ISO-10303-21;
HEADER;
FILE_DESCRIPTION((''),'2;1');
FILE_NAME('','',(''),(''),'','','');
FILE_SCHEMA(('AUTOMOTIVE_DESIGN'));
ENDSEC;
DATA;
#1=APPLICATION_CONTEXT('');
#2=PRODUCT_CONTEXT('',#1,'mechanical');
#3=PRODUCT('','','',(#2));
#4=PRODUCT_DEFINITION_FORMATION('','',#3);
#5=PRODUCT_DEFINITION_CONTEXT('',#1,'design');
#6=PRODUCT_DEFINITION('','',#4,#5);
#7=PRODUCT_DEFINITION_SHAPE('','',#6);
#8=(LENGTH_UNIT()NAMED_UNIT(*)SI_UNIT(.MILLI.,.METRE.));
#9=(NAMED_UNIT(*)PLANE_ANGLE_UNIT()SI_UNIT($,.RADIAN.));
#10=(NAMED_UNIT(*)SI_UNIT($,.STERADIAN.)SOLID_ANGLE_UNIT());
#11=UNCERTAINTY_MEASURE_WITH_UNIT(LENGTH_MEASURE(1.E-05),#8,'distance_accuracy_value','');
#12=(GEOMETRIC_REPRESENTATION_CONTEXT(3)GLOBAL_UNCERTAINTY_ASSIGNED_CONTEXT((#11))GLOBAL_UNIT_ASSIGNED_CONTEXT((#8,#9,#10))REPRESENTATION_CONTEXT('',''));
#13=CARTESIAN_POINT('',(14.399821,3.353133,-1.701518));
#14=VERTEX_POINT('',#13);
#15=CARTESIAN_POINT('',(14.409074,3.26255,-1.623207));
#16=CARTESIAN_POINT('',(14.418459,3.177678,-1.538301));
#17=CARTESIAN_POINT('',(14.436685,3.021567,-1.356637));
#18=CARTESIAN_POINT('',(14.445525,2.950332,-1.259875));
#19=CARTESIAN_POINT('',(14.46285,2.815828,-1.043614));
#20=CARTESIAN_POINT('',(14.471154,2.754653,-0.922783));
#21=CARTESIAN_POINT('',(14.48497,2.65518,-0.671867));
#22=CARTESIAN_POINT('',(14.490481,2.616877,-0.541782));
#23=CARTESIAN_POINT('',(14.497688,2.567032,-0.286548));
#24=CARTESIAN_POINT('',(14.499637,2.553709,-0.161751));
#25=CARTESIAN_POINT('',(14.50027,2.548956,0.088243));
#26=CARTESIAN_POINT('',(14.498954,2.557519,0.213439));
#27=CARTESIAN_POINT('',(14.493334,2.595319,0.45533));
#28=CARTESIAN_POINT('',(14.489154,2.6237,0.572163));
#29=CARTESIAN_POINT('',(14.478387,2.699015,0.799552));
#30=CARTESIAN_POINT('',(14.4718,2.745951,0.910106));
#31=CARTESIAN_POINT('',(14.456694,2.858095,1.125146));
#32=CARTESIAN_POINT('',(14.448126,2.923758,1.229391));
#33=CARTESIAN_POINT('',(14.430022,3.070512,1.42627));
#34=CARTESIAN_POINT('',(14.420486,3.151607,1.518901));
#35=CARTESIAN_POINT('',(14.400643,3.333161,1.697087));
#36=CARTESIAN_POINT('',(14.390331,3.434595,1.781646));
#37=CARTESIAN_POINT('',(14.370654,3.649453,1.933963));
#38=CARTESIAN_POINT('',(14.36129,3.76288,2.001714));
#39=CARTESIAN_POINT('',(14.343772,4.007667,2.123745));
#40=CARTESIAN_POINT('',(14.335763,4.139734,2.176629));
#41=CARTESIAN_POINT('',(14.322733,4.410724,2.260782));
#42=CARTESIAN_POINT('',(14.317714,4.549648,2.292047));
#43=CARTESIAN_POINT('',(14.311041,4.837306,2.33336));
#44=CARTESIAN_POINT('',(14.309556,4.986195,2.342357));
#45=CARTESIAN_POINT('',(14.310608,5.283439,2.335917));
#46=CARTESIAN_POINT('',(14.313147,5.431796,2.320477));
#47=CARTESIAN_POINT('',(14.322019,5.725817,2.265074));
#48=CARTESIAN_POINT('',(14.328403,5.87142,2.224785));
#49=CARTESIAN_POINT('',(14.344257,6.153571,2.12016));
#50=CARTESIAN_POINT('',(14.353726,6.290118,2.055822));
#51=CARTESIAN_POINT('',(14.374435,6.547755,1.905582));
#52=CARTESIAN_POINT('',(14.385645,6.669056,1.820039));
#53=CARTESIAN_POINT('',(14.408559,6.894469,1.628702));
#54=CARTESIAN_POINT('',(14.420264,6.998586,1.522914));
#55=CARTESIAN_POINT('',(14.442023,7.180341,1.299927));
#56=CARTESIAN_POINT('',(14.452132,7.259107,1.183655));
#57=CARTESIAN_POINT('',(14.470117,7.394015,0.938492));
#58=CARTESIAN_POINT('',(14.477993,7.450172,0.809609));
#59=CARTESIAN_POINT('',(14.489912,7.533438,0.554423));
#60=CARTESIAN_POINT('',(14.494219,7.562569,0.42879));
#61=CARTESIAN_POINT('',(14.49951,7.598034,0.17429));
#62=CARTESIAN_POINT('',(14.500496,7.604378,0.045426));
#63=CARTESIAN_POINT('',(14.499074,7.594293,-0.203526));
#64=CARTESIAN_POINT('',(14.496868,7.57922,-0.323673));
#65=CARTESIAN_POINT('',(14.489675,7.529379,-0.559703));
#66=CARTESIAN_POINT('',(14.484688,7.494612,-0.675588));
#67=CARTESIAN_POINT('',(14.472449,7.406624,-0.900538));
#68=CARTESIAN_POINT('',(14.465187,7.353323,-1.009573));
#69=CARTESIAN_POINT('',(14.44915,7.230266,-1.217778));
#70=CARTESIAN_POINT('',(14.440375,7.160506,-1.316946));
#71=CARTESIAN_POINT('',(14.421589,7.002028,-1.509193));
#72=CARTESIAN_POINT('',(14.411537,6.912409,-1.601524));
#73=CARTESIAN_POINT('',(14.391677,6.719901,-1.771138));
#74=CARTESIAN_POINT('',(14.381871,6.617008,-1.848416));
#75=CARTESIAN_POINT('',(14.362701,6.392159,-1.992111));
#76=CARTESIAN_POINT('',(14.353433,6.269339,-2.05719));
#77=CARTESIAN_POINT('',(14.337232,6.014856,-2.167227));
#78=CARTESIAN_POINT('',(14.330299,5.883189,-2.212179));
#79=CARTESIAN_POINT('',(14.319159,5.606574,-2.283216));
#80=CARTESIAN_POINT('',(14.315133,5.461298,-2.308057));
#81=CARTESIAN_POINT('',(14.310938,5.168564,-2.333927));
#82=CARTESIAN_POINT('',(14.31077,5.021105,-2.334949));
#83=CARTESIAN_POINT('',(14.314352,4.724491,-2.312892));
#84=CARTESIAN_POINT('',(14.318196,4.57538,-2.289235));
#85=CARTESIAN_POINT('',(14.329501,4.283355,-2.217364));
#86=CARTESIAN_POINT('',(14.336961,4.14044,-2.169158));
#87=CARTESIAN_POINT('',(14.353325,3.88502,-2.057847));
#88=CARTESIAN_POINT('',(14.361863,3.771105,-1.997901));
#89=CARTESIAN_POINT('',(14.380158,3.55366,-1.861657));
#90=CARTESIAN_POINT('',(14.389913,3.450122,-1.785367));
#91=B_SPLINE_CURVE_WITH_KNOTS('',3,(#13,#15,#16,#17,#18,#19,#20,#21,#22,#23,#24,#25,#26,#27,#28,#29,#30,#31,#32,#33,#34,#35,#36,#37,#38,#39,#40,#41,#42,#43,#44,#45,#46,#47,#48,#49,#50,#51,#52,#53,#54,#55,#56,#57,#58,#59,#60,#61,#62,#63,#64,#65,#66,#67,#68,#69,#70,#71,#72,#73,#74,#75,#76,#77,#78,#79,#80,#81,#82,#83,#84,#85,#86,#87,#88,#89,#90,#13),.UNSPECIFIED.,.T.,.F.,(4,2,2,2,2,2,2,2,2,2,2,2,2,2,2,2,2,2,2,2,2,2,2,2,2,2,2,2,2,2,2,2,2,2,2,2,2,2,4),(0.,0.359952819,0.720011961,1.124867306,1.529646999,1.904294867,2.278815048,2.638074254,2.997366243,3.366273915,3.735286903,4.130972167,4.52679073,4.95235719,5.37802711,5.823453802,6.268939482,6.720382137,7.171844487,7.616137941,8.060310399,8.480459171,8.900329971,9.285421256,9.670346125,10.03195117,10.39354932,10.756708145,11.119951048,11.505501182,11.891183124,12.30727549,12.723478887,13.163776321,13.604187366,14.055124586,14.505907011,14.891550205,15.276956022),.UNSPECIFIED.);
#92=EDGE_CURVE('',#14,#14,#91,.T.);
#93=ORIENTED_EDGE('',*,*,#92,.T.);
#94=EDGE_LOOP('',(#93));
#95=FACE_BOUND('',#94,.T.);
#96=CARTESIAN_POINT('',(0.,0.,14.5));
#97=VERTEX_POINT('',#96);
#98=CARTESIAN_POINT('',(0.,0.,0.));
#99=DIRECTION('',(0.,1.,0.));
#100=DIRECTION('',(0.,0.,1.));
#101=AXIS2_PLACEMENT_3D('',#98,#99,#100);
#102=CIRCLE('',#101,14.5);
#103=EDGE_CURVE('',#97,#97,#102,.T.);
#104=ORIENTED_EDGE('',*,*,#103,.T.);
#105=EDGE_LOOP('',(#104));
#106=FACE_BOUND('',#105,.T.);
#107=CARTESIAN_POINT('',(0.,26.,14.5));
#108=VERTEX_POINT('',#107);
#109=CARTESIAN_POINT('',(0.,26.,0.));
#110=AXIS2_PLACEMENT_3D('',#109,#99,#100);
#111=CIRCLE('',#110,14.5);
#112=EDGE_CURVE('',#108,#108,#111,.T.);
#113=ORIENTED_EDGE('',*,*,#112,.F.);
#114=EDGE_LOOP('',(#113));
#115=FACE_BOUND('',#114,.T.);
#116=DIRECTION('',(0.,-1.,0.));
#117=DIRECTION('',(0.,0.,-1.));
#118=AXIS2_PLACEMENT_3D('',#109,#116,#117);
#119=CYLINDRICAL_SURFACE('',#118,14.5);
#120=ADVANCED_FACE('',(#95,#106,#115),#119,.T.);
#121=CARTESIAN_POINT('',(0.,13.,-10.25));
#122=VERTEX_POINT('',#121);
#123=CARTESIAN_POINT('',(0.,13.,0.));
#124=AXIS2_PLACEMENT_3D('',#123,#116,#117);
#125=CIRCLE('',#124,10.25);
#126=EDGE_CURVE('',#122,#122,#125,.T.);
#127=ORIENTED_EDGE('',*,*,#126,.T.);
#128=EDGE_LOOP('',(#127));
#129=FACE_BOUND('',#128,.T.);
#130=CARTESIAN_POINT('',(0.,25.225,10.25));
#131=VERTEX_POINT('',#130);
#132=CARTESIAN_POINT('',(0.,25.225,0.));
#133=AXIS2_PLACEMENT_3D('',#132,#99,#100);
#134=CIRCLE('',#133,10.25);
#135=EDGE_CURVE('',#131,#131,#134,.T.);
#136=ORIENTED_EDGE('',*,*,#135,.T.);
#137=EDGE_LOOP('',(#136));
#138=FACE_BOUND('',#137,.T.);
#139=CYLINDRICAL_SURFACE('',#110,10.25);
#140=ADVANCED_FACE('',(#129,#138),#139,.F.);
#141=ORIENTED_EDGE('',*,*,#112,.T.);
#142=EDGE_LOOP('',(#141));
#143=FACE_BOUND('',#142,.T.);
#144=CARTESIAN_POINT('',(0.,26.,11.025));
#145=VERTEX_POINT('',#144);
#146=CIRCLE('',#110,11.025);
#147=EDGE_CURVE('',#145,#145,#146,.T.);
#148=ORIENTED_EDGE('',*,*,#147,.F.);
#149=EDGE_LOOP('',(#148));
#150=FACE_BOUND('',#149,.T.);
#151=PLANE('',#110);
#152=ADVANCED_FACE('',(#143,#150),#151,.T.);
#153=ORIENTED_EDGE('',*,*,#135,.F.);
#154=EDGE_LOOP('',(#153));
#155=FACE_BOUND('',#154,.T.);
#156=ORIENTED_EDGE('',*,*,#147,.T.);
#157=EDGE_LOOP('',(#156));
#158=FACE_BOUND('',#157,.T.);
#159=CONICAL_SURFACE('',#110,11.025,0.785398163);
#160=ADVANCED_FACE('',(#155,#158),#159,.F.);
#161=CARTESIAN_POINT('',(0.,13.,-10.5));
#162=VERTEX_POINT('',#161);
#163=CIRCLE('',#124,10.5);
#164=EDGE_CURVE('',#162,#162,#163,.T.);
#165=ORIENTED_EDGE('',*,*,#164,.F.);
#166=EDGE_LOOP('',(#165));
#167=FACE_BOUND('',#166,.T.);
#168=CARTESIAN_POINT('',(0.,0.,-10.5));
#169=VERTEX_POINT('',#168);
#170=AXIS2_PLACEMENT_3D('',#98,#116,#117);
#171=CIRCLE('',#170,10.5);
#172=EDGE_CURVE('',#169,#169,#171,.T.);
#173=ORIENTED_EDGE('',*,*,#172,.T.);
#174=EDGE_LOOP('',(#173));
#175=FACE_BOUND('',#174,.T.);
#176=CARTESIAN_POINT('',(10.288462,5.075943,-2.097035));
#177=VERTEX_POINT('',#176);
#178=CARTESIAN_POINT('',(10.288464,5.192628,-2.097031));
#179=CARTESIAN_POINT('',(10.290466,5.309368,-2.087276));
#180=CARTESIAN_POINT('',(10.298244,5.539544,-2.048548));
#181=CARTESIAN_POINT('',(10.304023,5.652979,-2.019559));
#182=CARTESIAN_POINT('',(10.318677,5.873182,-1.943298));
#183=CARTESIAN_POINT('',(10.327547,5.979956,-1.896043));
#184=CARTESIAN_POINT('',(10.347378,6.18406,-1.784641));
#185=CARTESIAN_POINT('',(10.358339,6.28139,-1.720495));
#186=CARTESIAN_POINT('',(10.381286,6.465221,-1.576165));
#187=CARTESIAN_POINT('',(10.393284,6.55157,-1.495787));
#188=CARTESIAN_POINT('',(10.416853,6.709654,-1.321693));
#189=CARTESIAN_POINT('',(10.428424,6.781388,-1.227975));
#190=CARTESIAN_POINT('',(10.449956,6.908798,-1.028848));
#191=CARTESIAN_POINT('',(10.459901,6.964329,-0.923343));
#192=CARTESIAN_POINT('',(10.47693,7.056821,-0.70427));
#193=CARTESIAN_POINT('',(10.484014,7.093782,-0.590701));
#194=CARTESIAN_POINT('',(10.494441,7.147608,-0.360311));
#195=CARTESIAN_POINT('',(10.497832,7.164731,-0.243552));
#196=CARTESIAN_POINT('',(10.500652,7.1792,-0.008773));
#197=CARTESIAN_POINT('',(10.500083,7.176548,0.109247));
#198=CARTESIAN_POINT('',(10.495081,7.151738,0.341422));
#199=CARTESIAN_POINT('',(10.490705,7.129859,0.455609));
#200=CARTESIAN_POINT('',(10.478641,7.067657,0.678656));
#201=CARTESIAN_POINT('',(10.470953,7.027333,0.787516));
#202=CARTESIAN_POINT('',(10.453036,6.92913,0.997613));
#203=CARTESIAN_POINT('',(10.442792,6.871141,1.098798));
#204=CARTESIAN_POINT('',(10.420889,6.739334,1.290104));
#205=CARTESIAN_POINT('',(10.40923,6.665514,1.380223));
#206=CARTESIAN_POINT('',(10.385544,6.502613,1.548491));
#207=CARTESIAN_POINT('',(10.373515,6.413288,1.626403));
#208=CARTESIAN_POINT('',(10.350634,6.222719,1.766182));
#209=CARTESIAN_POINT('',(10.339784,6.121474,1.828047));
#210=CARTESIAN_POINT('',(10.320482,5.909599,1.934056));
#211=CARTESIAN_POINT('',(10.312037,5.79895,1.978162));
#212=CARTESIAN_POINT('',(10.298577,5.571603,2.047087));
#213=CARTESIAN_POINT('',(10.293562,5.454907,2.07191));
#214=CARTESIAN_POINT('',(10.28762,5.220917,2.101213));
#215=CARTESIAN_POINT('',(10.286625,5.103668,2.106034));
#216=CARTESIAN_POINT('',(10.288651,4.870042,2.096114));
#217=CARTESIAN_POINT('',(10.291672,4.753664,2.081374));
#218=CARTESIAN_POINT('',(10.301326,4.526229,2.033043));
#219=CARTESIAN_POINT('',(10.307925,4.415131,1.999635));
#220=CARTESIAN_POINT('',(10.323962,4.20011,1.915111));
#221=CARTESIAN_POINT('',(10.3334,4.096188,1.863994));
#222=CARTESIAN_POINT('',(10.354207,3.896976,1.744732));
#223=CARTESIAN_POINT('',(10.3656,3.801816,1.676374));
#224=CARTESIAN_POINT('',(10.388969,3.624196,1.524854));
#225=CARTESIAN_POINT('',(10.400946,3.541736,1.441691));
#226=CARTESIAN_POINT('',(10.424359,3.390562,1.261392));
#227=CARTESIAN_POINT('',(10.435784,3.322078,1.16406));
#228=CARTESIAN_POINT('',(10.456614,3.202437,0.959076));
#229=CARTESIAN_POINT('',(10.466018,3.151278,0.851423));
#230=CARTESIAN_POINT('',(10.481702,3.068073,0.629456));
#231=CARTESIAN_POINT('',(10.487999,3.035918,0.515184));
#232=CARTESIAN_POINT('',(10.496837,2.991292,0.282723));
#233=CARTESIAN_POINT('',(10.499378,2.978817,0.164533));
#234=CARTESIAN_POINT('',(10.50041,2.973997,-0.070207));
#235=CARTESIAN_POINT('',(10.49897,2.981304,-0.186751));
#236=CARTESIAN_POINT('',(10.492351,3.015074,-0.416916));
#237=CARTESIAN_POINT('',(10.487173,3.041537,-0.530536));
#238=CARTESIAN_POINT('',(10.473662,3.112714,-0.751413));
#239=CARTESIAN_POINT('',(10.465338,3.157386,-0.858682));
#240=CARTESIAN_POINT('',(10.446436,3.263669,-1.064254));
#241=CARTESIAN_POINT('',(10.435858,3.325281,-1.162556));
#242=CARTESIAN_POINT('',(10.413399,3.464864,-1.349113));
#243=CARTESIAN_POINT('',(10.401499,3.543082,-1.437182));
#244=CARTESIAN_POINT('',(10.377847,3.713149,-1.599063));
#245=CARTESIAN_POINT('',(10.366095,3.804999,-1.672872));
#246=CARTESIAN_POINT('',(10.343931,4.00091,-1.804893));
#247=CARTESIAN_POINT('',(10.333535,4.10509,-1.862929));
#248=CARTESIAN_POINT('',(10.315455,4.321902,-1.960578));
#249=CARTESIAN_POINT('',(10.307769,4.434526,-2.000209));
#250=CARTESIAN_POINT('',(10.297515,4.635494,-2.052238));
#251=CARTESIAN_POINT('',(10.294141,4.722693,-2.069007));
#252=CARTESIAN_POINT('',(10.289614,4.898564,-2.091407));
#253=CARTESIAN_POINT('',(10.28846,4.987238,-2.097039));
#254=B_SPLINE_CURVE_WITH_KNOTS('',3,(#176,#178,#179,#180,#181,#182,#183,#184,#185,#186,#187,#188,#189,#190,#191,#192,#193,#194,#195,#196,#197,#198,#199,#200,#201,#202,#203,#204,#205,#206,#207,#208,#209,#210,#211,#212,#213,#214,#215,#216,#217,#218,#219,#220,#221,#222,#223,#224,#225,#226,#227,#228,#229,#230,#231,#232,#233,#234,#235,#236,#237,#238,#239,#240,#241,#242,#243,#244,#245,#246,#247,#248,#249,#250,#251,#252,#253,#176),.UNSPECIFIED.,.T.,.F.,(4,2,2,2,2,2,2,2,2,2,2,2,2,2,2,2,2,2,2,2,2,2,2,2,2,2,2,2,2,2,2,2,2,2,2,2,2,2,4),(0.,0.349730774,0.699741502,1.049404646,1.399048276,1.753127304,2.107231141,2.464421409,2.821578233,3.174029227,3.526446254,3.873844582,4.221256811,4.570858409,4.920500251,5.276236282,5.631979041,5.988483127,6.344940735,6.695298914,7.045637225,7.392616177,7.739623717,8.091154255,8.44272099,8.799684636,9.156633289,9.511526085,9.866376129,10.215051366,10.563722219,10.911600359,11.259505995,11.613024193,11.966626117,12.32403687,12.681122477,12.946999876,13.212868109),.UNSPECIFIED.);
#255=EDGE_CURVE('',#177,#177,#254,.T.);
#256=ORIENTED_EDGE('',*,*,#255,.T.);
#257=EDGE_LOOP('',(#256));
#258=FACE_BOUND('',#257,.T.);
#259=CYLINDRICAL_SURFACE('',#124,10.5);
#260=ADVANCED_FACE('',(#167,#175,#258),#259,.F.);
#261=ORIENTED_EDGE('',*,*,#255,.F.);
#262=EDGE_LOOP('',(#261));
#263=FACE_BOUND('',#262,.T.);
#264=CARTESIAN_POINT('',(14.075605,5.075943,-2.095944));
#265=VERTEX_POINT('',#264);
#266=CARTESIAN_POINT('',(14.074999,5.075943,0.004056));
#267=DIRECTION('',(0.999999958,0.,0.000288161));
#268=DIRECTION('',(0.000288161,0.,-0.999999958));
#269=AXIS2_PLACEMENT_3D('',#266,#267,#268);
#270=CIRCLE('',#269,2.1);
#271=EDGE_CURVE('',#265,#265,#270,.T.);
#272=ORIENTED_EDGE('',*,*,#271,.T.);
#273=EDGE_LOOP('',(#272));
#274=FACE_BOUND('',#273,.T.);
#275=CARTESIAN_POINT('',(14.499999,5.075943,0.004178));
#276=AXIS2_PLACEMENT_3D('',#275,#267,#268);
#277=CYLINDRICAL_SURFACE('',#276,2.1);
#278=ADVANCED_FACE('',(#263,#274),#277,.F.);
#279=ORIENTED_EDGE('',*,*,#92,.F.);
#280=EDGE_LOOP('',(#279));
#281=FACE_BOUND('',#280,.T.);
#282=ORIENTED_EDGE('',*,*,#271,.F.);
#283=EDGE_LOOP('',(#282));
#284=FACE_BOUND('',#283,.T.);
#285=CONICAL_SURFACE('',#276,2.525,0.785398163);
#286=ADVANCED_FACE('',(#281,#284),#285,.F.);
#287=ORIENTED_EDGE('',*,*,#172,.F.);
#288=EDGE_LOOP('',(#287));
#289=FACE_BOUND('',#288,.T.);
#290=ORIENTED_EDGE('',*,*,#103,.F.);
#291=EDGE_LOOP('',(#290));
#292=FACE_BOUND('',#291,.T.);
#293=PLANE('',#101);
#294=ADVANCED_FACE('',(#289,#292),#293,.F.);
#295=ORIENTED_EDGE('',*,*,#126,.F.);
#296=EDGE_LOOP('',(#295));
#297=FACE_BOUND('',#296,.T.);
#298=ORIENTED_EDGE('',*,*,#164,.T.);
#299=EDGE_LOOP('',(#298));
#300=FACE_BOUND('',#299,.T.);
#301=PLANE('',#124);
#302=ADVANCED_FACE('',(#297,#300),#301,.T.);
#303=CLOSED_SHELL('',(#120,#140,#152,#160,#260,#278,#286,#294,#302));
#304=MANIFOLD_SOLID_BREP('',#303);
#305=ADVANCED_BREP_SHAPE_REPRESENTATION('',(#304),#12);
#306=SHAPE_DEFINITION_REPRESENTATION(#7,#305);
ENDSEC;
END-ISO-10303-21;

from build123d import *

# Parameters (mm, degrees)
ESBO_O1_R                            = 14.5
RESSALTO_EXTRUS_O1_DEPTH             = 26
ESBO_O2_R                            = 10.5
CORTE_EXTRUS_O2_DEPTH                = 13
FURO_ROSCADO_DE_M22X1_51_D           = 20.5
FURO_ROSCADO_DE_M22X1_51_CSINK_D     = 22.05
FURO_ROSCADO_DE_M22X1_51_CSINK_ANGLE = 90


# Read off the part's stored shape, not the designer's step: Furo roscado de M51
with BuildPart() as part:
    # Esboço1 → Ressalto-extrusão1 (new body)
    with BuildSketch(Plane(origin=(0, 0, 0), x_dir=(1, 0, 0), z_dir=(0, 1, 0))):
        with Locations(Location((0, 0, 0), (0, 0, 90))):
            Circle(ESBO_O1_R)
    extrude(amount=RESSALTO_EXTRUS_O1_DEPTH)

    # Esboço2 → Corte-extrusão2 (cut)
    with BuildSketch(Plane.XZ):
        with Locations(Location((0, 0, 0), (0, 0, 270))):
            Circle(ESBO_O2_R)
    extrude(amount=-CORTE_EXTRUS_O2_DEPTH, mode=Mode.SUBTRACT)

    # Furo roscado de M22x1.51 (through all)
    with Locations(Plane(origin=(0, 26, 0), x_dir=(1, 0, 0), z_dir=(0, 1, 0))):
        with Locations((0, 0)):
            CounterSinkHole(FURO_ROSCADO_DE_M22X1_51_D / 2, FURO_ROSCADO_DE_M22X1_51_CSINK_D / 2, counter_sink_angle=FURO_ROSCADO_DE_M22X1_51_CSINK_ANGLE)

    # Furo roscado de M51 outline → Furo roscado de M51 (revolve, cut)
    with BuildSketch(Plane(origin=(0, 5.075943164, 0), x_dir=(0, 1, 0), z_dir=(0.000288160587710413, 0, -0.999999958481737))):
        Polygon((2.525059426, 14.500059426), (0, 14.500059426), (0, 10.287739691), (2.1, 10.287739691), (2.1, 14.075), align=None)
    revolve(axis=Axis((0, 5.075943164, 0), (0.999999958481737, 0, 0.000288160587710413)), mode=Mode.SUBTRACT)


solid = part.part
